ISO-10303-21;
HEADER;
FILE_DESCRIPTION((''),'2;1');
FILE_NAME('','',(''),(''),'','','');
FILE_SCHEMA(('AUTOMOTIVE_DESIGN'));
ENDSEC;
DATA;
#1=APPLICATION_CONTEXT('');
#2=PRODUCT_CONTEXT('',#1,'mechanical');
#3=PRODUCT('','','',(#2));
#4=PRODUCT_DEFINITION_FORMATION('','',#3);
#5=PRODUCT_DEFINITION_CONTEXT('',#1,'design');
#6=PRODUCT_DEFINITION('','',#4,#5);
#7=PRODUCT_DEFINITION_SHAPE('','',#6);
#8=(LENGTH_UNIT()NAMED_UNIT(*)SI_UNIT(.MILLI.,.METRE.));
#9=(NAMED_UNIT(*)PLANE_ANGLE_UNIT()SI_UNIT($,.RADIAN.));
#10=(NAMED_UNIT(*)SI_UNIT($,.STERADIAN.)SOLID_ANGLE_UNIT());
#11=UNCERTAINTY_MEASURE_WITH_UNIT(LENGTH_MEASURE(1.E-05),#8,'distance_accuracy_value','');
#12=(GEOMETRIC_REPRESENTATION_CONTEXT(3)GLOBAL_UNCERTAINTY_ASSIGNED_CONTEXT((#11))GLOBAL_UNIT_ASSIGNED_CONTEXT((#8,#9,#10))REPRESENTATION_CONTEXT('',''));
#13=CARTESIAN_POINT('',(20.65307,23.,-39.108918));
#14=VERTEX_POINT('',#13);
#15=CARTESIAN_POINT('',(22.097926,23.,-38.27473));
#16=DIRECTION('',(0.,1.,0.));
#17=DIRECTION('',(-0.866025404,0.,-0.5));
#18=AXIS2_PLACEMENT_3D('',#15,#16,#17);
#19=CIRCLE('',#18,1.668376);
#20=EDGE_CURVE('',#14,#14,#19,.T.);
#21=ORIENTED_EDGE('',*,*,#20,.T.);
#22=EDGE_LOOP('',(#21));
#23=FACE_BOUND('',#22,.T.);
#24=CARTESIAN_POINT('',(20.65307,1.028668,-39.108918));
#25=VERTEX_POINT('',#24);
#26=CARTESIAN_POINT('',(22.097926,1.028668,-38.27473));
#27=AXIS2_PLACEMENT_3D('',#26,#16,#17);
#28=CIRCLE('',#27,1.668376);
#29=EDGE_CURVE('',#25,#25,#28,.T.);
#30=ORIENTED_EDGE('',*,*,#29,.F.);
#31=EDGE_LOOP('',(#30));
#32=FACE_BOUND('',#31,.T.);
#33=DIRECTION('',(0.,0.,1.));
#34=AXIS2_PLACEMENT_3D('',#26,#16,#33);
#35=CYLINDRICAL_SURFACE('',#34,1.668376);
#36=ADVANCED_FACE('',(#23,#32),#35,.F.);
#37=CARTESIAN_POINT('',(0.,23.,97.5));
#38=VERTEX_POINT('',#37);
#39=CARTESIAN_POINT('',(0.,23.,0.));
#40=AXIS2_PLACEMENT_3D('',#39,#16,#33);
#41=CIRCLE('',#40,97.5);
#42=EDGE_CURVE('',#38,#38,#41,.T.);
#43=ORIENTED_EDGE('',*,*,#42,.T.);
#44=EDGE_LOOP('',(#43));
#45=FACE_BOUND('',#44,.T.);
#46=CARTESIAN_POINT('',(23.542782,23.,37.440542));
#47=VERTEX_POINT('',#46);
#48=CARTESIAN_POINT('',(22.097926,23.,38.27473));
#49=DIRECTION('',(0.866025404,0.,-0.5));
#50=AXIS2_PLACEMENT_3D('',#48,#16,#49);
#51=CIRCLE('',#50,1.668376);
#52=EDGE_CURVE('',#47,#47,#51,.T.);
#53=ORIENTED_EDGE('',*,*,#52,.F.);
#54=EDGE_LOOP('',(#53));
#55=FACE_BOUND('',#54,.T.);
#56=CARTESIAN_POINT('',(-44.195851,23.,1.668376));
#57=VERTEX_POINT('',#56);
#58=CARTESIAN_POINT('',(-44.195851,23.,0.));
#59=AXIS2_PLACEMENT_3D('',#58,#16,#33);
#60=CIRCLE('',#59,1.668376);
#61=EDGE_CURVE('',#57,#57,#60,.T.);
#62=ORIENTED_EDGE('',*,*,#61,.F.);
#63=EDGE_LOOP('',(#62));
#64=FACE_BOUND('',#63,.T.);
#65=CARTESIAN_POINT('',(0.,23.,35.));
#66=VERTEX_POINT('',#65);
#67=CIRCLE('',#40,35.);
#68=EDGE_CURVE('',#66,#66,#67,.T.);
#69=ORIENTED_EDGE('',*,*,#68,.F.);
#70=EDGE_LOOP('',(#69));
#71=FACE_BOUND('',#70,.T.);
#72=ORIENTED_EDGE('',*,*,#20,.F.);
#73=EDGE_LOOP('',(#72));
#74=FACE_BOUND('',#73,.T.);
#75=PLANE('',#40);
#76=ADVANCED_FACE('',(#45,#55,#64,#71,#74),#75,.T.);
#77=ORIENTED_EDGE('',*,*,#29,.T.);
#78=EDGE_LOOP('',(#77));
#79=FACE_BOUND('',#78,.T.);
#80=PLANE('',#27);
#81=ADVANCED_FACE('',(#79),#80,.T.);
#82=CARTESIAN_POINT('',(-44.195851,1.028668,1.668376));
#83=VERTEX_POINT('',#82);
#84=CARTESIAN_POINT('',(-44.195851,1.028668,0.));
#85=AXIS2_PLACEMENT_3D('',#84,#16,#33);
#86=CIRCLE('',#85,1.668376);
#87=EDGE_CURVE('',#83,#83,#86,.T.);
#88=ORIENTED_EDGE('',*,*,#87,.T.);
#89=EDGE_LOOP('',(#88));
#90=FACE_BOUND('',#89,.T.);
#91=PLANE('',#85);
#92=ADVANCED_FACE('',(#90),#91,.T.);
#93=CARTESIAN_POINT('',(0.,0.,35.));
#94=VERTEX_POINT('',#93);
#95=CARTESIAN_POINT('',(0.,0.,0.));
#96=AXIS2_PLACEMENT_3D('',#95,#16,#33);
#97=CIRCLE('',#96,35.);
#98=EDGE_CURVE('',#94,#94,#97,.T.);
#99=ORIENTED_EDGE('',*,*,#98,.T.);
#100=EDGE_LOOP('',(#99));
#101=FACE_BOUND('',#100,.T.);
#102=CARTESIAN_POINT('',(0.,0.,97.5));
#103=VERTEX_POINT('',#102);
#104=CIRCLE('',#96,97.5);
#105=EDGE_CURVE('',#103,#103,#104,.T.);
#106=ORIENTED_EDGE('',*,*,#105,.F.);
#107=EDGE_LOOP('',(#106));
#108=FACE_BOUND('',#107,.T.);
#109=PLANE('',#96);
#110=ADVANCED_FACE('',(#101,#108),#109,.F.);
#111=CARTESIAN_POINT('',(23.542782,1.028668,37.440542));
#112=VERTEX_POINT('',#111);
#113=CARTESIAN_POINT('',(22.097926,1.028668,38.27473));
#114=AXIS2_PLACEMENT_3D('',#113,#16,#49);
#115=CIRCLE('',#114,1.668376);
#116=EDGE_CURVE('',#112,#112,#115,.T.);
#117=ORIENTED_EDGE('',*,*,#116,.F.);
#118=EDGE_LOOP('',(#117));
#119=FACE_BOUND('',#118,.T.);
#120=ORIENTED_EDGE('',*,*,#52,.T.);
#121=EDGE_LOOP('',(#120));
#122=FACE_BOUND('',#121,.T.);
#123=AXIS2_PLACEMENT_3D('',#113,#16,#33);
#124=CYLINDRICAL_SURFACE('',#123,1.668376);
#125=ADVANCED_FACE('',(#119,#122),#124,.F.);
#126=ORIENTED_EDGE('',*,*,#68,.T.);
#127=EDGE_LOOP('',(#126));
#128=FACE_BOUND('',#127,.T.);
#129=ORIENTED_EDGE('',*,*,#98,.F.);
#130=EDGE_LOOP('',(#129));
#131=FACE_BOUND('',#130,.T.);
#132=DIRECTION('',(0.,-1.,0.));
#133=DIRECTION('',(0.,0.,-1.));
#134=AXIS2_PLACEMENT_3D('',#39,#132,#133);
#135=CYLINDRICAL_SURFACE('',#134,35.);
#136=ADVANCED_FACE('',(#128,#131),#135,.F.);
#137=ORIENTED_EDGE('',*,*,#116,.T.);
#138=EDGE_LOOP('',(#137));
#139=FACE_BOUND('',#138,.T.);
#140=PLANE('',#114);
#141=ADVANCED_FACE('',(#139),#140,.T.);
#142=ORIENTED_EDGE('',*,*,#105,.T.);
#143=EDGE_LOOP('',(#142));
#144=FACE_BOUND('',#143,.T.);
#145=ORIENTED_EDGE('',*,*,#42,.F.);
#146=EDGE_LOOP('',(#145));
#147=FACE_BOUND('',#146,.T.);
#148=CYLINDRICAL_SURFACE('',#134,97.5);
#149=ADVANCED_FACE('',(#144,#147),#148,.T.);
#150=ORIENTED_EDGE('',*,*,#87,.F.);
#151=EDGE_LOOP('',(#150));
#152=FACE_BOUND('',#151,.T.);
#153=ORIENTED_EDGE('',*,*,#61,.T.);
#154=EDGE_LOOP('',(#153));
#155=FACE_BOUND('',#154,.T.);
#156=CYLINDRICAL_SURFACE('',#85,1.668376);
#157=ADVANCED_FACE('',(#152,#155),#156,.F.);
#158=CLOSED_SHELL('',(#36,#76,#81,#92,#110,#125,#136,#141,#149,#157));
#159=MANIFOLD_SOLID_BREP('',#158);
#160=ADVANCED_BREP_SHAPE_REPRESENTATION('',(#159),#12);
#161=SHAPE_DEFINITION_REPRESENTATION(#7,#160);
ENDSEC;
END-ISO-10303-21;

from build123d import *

# Parameters (mm, degrees)
SKETCH1_R           = 97.5
BOSS_EXTRUDE1_DEPTH = 23
SKETCH2_R           = 35
CUT_EXTRUDE1_DEPTH  = 140.790915299
SKETCH3_R           = 1.668376245
CUT_EXTRUDE2_DEPTH  = 21.971332098
CIRPATTERN1_COUNT   = 3


with BuildPart() as part:
    # Sketch1 → Boss-Extrude1 (new body)
    with BuildSketch(Plane(origin=(0, 0, 0), x_dir=(1, 0, 0), z_dir=(0, 1, 0))):
        Circle(SKETCH1_R)
    extrude(amount=BOSS_EXTRUDE1_DEPTH)

    # Sketch2 → Cut-Extrude1 (cut, through all)
    with BuildSketch(Plane(origin=(0, 0, 0), x_dir=(1, 0, 0), z_dir=(0, 1, 0))):
        Circle(SKETCH2_R)
    extrude(amount=CUT_EXTRUDE1_DEPTH, mode=Mode.SUBTRACT)

    # Sketch3 → Cut-Extrude2 (cut)
    with BuildSketch(Plane(origin=(0, 23, 0), x_dir=(1, 0, 0), z_dir=(0, 1, 0))):
        with Locations((-44.195851492, 0)):
            Circle(SKETCH3_R)
    cut_extrude2 = extrude(amount=-CUT_EXTRUDE2_DEPTH, mode=Mode.SUBTRACT)

    # CirPattern1: Cut-Extrude2 ×3 about axis
    cirpattern1_axis = Axis((0, 0, 0), (0, 1, 0))
    for i in range(1, CIRPATTERN1_COUNT):
        add(cut_extrude2.rotate(cirpattern1_axis, i * 360 / CIRPATTERN1_COUNT), mode=Mode.SUBTRACT)


solid = part.part
